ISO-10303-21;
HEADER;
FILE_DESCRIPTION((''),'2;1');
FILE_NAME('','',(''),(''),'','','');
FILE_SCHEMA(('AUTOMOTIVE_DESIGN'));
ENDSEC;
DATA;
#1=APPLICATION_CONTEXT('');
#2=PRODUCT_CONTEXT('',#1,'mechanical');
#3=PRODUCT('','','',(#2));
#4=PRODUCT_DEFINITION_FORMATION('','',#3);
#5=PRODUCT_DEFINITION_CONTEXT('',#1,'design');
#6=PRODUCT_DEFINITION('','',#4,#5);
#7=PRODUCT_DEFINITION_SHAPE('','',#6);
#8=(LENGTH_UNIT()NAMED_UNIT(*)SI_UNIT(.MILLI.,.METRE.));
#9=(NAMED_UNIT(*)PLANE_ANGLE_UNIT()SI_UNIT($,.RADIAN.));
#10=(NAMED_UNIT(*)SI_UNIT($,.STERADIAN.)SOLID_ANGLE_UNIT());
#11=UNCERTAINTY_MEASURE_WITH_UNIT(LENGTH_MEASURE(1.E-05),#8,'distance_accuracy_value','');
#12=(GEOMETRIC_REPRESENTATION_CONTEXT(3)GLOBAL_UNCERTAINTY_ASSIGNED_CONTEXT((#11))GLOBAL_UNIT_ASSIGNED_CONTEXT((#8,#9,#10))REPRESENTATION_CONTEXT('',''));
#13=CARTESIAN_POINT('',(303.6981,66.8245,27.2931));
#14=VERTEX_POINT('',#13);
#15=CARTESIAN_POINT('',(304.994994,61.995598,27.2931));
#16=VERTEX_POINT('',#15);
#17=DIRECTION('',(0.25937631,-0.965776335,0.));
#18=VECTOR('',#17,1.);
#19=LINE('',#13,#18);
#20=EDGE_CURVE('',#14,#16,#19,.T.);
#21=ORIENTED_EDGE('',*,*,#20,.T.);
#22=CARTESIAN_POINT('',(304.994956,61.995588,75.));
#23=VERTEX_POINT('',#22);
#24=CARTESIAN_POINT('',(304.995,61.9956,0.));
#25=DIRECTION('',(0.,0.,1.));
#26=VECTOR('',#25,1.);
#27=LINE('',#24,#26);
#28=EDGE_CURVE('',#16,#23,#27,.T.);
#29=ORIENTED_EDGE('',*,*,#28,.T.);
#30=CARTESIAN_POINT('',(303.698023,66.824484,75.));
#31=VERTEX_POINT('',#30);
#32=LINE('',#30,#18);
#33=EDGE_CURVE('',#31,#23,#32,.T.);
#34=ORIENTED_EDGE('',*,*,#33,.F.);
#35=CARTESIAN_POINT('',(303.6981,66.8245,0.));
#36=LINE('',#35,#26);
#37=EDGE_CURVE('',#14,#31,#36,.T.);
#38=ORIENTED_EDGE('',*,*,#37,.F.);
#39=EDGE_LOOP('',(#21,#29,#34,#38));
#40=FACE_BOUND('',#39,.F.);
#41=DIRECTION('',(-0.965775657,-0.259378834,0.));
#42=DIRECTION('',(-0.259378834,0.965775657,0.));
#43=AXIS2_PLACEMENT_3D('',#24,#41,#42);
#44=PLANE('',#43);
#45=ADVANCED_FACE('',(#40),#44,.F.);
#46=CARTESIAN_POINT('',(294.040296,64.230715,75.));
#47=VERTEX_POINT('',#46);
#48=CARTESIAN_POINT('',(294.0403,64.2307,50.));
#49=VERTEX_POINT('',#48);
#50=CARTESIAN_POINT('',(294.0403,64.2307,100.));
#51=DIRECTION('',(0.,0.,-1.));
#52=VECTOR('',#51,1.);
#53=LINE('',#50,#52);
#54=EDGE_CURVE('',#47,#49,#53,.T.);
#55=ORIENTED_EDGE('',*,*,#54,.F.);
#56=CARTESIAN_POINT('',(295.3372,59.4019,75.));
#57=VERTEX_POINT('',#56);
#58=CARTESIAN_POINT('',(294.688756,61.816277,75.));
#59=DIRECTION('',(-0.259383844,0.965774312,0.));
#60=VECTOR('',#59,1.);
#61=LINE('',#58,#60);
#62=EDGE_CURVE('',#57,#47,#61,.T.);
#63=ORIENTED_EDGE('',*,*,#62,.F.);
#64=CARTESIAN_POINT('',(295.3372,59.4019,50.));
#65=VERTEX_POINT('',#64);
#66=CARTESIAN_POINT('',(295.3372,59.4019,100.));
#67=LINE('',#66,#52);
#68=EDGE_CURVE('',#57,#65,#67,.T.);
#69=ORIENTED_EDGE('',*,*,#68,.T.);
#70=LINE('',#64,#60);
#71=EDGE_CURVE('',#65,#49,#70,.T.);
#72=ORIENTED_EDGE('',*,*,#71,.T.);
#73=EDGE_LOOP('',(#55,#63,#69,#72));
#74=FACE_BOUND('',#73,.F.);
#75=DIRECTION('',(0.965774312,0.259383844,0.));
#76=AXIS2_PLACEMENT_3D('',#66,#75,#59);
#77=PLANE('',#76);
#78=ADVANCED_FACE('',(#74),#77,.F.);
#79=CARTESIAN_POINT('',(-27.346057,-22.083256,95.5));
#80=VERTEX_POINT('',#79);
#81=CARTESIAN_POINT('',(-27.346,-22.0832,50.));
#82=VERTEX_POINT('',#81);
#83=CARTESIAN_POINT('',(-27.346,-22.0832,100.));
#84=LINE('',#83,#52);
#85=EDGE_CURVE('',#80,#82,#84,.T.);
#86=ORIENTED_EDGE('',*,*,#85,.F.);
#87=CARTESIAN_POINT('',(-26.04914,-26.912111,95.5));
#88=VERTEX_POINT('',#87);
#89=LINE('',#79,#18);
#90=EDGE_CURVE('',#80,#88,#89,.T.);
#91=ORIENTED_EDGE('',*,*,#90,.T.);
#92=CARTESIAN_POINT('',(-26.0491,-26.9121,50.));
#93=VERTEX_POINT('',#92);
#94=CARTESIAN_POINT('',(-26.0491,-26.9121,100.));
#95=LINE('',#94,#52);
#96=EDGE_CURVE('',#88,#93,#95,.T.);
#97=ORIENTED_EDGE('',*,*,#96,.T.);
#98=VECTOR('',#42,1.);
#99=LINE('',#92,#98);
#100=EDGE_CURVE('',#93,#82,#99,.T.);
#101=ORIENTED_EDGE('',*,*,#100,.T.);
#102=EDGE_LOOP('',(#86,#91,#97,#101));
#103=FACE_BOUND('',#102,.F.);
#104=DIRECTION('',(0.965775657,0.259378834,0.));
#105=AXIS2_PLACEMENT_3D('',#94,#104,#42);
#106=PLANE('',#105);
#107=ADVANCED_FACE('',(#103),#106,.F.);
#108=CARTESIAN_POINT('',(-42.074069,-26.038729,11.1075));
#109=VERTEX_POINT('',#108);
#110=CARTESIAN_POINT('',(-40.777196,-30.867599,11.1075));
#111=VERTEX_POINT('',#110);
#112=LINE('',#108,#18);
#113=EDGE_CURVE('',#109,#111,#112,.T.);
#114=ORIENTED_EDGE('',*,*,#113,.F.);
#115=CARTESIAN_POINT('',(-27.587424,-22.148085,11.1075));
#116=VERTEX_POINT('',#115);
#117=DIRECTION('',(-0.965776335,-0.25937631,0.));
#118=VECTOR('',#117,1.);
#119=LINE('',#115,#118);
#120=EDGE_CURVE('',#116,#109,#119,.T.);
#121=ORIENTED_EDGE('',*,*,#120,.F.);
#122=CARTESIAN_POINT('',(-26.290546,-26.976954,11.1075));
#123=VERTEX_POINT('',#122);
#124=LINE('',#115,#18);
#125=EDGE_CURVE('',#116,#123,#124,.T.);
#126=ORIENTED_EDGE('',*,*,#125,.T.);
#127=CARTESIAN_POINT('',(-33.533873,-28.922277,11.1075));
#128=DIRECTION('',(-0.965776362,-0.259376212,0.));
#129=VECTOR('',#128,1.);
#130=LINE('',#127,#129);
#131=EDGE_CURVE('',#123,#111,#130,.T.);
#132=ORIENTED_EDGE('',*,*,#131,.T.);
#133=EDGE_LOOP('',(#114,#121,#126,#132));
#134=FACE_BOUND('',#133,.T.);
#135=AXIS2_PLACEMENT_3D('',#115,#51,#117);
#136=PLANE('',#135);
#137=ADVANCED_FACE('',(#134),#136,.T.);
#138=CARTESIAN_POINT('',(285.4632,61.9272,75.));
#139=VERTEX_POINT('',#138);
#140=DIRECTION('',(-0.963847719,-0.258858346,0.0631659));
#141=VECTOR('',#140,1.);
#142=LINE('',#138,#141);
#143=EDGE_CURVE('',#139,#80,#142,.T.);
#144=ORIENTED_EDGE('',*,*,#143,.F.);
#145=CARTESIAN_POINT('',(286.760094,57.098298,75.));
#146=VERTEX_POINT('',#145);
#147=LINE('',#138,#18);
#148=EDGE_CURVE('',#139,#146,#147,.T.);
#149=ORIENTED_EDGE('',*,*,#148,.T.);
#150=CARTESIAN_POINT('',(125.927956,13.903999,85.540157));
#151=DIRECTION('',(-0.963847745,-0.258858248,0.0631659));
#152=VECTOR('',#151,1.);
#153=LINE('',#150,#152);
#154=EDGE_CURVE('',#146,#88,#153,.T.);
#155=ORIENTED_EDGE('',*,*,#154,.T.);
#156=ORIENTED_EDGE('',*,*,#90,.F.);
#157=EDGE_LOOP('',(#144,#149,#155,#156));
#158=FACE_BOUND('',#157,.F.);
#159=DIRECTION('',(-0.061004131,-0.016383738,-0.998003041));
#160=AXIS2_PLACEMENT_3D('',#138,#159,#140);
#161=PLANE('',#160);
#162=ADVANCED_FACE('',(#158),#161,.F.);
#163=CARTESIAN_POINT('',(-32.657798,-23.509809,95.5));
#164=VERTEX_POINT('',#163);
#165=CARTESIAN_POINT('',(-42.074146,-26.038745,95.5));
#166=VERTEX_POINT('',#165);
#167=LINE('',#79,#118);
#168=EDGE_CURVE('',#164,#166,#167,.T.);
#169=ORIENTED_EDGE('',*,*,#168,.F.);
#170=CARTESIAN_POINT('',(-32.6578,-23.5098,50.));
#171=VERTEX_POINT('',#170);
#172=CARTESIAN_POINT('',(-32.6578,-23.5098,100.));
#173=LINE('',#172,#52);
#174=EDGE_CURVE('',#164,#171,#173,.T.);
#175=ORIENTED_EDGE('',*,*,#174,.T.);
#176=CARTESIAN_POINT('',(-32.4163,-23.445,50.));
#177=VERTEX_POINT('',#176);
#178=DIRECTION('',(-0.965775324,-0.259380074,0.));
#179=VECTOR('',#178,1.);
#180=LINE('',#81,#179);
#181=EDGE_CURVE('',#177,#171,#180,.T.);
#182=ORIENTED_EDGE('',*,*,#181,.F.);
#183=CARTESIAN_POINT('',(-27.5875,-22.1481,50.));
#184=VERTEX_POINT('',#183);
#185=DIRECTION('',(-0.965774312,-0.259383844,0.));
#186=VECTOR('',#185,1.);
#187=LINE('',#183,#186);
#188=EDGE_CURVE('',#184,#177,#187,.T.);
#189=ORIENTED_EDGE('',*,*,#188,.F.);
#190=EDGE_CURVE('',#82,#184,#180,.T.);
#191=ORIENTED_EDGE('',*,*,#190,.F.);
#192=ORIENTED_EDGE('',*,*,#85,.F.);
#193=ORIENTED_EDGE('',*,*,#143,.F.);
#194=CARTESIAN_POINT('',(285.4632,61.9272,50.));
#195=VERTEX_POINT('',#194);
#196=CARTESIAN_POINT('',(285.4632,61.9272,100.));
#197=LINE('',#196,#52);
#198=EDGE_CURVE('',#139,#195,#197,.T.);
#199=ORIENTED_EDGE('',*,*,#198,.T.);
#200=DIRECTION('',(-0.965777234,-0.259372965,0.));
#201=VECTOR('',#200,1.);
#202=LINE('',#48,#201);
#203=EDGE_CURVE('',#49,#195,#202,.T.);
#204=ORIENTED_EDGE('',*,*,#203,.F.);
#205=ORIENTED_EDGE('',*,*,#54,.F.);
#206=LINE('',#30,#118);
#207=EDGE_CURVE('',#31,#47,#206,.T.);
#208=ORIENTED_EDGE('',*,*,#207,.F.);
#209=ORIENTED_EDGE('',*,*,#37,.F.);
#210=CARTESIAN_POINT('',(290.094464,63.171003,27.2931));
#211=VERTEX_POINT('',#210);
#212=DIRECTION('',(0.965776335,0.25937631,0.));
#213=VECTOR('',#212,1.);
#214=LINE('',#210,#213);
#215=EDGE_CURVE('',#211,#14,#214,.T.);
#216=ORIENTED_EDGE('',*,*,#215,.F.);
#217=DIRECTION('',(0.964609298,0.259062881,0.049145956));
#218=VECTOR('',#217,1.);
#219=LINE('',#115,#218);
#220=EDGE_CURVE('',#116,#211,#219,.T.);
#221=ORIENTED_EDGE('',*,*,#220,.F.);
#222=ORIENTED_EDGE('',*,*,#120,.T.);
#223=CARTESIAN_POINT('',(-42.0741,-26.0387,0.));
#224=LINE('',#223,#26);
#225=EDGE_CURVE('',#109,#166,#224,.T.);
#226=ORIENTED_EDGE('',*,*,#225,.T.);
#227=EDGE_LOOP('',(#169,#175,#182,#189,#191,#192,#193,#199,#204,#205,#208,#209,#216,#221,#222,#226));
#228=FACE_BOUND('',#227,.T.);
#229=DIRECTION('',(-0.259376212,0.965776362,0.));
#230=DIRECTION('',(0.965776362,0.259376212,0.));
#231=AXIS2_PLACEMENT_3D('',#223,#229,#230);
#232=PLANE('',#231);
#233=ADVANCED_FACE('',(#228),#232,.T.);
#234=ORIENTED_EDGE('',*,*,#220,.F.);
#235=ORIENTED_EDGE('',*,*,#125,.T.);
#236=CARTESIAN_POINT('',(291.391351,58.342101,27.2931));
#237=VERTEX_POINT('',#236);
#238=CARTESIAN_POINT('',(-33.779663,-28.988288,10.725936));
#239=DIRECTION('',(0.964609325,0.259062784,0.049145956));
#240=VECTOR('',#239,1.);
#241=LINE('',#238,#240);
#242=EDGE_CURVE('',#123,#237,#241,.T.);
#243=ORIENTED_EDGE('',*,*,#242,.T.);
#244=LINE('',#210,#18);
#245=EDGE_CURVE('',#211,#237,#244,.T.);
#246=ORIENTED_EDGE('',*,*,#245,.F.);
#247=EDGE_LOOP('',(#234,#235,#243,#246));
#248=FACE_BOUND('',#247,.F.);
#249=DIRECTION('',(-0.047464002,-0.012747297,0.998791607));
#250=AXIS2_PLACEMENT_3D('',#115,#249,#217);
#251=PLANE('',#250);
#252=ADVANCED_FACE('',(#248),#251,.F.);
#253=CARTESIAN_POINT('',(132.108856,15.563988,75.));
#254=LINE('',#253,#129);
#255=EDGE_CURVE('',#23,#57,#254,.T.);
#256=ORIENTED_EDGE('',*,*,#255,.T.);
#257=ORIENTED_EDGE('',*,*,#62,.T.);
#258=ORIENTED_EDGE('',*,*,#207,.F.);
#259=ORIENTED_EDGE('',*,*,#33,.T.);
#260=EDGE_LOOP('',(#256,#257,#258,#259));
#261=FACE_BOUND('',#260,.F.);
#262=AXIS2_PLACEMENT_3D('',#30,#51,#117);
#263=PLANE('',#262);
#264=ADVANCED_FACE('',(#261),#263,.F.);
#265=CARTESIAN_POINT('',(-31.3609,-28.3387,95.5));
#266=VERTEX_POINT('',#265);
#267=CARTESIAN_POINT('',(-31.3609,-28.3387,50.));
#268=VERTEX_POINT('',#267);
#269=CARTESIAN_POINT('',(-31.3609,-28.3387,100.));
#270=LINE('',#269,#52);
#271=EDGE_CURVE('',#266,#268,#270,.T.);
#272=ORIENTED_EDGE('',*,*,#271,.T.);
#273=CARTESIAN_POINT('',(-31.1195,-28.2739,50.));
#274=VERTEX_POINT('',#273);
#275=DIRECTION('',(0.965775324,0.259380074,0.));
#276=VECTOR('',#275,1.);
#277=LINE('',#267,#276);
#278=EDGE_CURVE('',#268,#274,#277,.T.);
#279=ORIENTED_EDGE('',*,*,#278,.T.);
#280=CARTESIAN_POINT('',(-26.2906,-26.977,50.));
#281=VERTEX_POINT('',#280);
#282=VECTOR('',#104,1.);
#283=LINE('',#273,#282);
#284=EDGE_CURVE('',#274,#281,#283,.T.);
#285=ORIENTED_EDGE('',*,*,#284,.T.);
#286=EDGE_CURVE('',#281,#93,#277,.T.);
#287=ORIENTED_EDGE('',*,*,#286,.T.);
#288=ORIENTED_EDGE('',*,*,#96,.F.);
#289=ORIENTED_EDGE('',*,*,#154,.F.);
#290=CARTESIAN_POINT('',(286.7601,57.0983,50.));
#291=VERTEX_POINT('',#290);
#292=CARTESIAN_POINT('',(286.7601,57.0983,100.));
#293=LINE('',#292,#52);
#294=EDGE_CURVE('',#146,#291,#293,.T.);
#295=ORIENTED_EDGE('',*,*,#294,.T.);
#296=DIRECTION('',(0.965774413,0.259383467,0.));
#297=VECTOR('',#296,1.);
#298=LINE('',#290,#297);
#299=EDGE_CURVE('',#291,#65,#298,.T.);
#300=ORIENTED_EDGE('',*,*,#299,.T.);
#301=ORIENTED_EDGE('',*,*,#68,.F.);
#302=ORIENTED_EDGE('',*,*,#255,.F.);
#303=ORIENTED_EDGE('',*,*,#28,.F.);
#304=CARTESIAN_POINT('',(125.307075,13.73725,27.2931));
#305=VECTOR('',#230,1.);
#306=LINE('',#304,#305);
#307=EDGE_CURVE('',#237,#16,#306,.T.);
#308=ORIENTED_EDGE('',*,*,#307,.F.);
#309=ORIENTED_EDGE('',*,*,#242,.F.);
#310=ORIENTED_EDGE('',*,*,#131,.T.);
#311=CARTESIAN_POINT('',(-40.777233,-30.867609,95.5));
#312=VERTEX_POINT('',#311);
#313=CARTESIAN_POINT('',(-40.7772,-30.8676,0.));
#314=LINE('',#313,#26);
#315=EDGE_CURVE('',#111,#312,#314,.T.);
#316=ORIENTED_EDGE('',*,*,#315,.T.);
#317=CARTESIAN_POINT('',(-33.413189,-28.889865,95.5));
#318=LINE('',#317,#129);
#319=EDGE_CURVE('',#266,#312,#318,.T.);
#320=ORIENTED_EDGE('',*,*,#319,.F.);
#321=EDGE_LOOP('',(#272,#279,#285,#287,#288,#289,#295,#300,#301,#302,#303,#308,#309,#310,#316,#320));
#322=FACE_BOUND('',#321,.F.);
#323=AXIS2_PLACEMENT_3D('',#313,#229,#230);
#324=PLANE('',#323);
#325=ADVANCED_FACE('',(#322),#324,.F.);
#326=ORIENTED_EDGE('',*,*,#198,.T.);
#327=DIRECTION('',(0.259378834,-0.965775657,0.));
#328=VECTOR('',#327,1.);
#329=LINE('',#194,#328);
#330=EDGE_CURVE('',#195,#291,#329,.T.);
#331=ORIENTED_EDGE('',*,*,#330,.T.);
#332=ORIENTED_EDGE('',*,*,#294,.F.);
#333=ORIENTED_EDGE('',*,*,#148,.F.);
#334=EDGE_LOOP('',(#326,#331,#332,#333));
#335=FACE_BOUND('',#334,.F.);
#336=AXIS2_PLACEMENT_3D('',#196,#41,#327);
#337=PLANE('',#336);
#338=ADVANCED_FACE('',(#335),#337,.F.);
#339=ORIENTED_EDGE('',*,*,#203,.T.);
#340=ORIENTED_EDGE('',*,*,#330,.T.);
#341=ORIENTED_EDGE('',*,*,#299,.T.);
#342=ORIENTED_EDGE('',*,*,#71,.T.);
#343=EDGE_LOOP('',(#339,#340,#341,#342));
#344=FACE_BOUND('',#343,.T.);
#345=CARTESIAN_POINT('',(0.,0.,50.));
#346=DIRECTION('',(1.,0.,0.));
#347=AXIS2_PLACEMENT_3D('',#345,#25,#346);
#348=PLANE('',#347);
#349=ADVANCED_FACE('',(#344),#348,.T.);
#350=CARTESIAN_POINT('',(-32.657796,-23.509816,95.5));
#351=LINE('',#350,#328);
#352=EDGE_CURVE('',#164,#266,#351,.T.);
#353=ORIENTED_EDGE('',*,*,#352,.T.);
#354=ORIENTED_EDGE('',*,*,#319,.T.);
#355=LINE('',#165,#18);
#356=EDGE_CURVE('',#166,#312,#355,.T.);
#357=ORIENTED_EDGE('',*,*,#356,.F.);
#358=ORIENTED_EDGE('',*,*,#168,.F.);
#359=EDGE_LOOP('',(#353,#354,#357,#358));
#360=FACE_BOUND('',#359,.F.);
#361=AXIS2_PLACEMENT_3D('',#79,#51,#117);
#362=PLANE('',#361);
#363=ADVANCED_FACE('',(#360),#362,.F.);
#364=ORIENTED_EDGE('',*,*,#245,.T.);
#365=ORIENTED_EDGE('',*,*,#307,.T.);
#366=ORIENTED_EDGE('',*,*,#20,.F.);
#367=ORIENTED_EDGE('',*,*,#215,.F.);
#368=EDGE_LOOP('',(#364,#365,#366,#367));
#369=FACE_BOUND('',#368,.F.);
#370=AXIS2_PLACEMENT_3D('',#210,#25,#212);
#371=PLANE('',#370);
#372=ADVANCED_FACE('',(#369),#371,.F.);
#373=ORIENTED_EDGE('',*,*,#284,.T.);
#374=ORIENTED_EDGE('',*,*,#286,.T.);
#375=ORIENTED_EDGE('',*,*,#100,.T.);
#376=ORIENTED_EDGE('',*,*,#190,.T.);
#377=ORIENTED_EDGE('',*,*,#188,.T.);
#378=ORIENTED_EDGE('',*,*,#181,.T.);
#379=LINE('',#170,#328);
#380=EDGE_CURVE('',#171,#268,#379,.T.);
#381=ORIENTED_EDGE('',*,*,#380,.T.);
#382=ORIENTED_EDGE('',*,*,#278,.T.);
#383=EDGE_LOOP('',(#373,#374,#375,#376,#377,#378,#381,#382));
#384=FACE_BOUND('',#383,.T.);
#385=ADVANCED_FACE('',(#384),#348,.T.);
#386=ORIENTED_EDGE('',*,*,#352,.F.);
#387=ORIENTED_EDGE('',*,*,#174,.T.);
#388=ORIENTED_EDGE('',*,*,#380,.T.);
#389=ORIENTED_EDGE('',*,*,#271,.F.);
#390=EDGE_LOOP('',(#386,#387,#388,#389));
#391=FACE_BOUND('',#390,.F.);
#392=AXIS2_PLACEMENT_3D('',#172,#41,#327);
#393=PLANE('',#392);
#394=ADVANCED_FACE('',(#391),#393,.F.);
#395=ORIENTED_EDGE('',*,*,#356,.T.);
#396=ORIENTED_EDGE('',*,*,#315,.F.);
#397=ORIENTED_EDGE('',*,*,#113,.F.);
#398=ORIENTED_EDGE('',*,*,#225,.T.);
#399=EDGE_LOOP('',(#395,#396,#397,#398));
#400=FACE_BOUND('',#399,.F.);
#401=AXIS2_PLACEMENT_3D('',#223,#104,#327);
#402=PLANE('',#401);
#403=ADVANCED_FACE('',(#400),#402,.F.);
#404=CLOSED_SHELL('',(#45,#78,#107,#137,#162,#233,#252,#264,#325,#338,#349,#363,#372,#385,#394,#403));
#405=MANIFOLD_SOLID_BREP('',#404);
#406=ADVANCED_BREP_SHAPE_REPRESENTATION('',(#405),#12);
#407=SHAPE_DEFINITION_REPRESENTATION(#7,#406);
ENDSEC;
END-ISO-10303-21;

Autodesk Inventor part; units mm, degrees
ref_plane "YZ Plane" through (0, 0, 0) normal (1, 0, 0) x (0, 1, 0)
ref_plane "XZ Plane" through (0, 0, 0) normal (0, 1, 0) x (-1, 0, 0)
sketch "Sketch1" plane through (0, 0, 0) normal (0, 0, 1) x (1, 0, 0)
  line L0 (-63.5719, 111.8382) -> (-7.6155, -96.5129) construction
  line L1 (-12.4444, -97.8098) -> (-68.7777, 111.945) construction
  line L2 (-42.0741, -26.0387) -> (-40.7772, -30.8676)
  line L3 (-40.7772, -30.8676) -> (304.995, 61.9956)
  line L4 (304.995, 61.9956) -> (303.6981, 66.8245)
  line L5 (-23.1781, -38.5663) -> (-40.7772, -30.8676) construction
  line L6 (247.1858, -96.9584) -> (307.8088, 111.597) construction
  line L7 (-42.0741, -26.0387) -> (-32.4163, -23.445) construction
  line L8 (294.0403, 64.2307) -> (303.6981, 66.8245) construction
  line L9 (-42.0741, -26.0387) -> (303.6981, 66.8245)
  point P0 (0, 0)
extrude "Extrusion1" add sketch "Sketch1" along normal blind 100
ref_plane "Work Plane1" through (0, 0, 50) normal (0, 0, 1) x (1, 0, 0)
sketch "Sketch3" plane through (0, 0, 100) normal (0, 0, 1) x (1, 0, 0)
  line L0 (302.6018, 111.597) -> (307.8088, 111.597) construction
  line L1 (302.6018, 111.597) -> (242.3845, -95.5627) construction
  line L2 (242.3845, -95.5627) -> (247.1858, -96.9584) construction
  line L3 (247.1858, -96.9584) -> (307.8088, 111.597) construction
  line L4 (-42.0741, -26.0387) -> (-40.7772, -30.8676) construction
  line L5 (-40.7772, -30.8676) -> (304.995, 61.9956) construction
  line L6 (304.995, 61.9956) -> (303.6981, 66.8245) construction
  line L7 (303.6981, 66.8245) -> (-42.0741, -26.0387) construction
  line L8 (285.4632, 61.9272) -> (286.7601, 57.0983)
  line L9 (286.7601, 57.0983) -> (295.3372, 59.4019)
  line L10 (295.3372, 59.4019) -> (294.0403, 64.2307)
  line L11 (294.0403, 64.2307) -> (285.4632, 61.9272)
  point P0 (0, 0)
extrude "Extrusion2" cut sketch "Sketch3" against normal up to surface (50 mm away)
sketch "Sketch4" plane through (0, 0, 100) normal (0, 0, 1) x (1, 0, 0)
  line L0 (286.7601, 57.0983) -> (285.4632, 61.9272) construction
  line L1 (285.4632, 61.9272) -> (-42.0741, -26.0387) construction
  line L2 (-42.0741, -26.0387) -> (-40.7772, -30.8676) construction
  line L3 (-40.7772, -30.8676) -> (286.7601, 57.0983) construction
  line L4 (-63.5719, 111.8382) -> (-68.7777, 111.945) construction
  line L5 (-12.4444, -97.8098) -> (-68.7777, 111.945) construction
  line L6 (-7.6155, -96.5129) -> (-12.4444, -97.8098) construction
  line L7 (-63.5719, 111.8382) -> (-7.6155, -96.5129) construction
  line L8 (-40.7772, -30.8676) -> (286.7601, 57.0983) construction
  line L9 (-32.4163, -23.445) -> (-31.1195, -28.2739)
  line L10 (-31.1195, -28.2739) -> (-26.2906, -26.977)
  line L11 (-26.2906, -26.977) -> (-27.5875, -22.1481)
  line L12 (-27.5875, -22.1481) -> (-32.4163, -23.445)
  line L13 (-32.6578, -23.5098) -> (-31.3609, -28.3387)
  line L14 (-31.3609, -28.3387) -> (-26.0491, -26.9121)
  line L15 (-26.0491, -26.9121) -> (-27.346, -22.0832)
  line L16 (-27.346, -22.0832) -> (-32.6578, -23.5098)
  line L17 (285.4632, 61.9272) -> (-42.0741, -26.0387) projected
  point P0 (0, 0)
  point P1 (-28.705, -27.6254)
  dimension "d21" = 5.5
extrude "Extrusion3" cut sketch "Sketch4" against normal up to surface (50 mm away)
ref_plane "Work Plane2" through (315.6821, 138.6828, 40.9) normal (0.0484699, 0.1667464, -0.9848078) x (-0.9602541, 0.2791272, 0)
ref_plane "Work Plane3" through (238.7196, -108.8102, 126.4793) normal (0, 0, -1) x (0, 1, 0)
sketch "Sketch6" plane through (303.6981, 66.8245, 100) normal (-0.2593763, 0.9657763, 0) x (0.9657763, 0.2593763, 0)
  line L0 (-348.2751, 50) -> (-342.7751, 50) construction
  line L1 (-18.881, 0) -> (-342.7751, 0) construction
  line L2 (-18.881, 0) -> (-18.881, 50) construction
  line L3 (-18.881, 50) -> (-10, 50) construction
  line L4 (-10, 50) -> (-10, 0) construction
  line L5 (0, 0) -> (-10, 0) construction
  line L6 (0, 100) -> (0, 0) construction
  line L7 (0, 100) -> (-358.0251, 100) construction
  line L8 (-358.0251, 100) -> (-358.0251, 0) construction
  line L9 (-14.0857, 72.7069) -> (0, 72.7069)
  line L10 (0, 100) -> (0, 0) construction
  line L11 (0, 72.7069) -> (0, 100)
  line L12 (-358.0251, 100) -> (0, 100) projected
  line L13 (0, 100) -> (-358.0251, 100)
  line L14 (-358.0251, 100) -> (-358.0251, 88.8925)
  line L15 (-358.0251, 100) -> (-358.0251, 0) construction
  line L16 (-343.0251, 88.8925) -> (-358.0251, 88.8925)
  line L17 (-343.0251, 88.8925) -> (-14.0857, 72.7069)
  line L18 (-358.0251, 100) -> (-358.0251, 0) construction
  line L19 (-342.7751, 50) -> (-342.7751, 0) projected
  line L20 (-348.2751, 0) -> (-358.0251, 0) projected
  line L21 (-348.2751, 0) -> (-348.2751, 50) projected
  point P0 (-310.6371, 100)
extrude "Extrusion5" cut sketch "Sketch6" against normal through all
sketch "Sketch7" plane through (285.4632, 61.9272, 100) normal (-0.2593763, 0.9657763, 0) x (0.9657763, 0.2593763, 0)
  line L0 (18.881, 72.7069) -> (18.881, 0) construction
  line L1 (-339.1441, 88.8925) -> (-339.1441, 0) construction
  line L2 (-323.8941, 4.5) -> (-339.1441, 4.5)
  line L3 (-339.1441, 4.5) -> (-339.1441, 0)
  line L4 (-339.1441, 0) -> (18.881, 0) projected
  line L5 (-339.1441, 0) -> (18.881, 0)
  line L6 (8.881, 0) -> (18.881, 0) projected
  line L7 (18.881, 0) -> (18.881, 25)
  line L8 (0, 0) -> (0, 50) construction
  line L9 (18.881, 25) -> (0, 25)
  line L10 (0, 25) -> (-323.8941, 4.5)
  line L11 (0, 50) -> (8.881, 50) construction
  line L12 (-323.8941, 50) -> (-323.8941, 0) construction
  point P0 (-291.7561, 100)
  dimension "d17" = 25
  dimension "d18" = 4.5
ref_plane "Work Plane4" through (315.6821, 138.6828, 45.9) normal (0.9602541, -0.2791272, 0) x (0.2791272, 0.9602541, 0)
sketch "Sketch8" plane through (315.6821, 138.6828, 45.9) normal (0.9602541, -0.2791272, 0) x (0.2791272, 0.9602541, 0)
  line L0 (-245.3946, 71.5637) -> (-28.2069, 15.6815) construction
  line L1 (-82.1398, 54.1) -> (-82.1398, 4.1) construction
  point P0 (-221.2862, -45.9)
  point P1 (-82.1398, 29.5584)
  dimension "d16" = 25.4584
ref_plane "Work Plane5" through (-76.0939, 139.1865, 45.8) normal (-0.9657763, -0.2593763, 0) x (-0.2593763, 0.9657763, 0)
extrude "Extrusion6" cut sketch "Sketch7" against normal through all
properties part number "brace"
